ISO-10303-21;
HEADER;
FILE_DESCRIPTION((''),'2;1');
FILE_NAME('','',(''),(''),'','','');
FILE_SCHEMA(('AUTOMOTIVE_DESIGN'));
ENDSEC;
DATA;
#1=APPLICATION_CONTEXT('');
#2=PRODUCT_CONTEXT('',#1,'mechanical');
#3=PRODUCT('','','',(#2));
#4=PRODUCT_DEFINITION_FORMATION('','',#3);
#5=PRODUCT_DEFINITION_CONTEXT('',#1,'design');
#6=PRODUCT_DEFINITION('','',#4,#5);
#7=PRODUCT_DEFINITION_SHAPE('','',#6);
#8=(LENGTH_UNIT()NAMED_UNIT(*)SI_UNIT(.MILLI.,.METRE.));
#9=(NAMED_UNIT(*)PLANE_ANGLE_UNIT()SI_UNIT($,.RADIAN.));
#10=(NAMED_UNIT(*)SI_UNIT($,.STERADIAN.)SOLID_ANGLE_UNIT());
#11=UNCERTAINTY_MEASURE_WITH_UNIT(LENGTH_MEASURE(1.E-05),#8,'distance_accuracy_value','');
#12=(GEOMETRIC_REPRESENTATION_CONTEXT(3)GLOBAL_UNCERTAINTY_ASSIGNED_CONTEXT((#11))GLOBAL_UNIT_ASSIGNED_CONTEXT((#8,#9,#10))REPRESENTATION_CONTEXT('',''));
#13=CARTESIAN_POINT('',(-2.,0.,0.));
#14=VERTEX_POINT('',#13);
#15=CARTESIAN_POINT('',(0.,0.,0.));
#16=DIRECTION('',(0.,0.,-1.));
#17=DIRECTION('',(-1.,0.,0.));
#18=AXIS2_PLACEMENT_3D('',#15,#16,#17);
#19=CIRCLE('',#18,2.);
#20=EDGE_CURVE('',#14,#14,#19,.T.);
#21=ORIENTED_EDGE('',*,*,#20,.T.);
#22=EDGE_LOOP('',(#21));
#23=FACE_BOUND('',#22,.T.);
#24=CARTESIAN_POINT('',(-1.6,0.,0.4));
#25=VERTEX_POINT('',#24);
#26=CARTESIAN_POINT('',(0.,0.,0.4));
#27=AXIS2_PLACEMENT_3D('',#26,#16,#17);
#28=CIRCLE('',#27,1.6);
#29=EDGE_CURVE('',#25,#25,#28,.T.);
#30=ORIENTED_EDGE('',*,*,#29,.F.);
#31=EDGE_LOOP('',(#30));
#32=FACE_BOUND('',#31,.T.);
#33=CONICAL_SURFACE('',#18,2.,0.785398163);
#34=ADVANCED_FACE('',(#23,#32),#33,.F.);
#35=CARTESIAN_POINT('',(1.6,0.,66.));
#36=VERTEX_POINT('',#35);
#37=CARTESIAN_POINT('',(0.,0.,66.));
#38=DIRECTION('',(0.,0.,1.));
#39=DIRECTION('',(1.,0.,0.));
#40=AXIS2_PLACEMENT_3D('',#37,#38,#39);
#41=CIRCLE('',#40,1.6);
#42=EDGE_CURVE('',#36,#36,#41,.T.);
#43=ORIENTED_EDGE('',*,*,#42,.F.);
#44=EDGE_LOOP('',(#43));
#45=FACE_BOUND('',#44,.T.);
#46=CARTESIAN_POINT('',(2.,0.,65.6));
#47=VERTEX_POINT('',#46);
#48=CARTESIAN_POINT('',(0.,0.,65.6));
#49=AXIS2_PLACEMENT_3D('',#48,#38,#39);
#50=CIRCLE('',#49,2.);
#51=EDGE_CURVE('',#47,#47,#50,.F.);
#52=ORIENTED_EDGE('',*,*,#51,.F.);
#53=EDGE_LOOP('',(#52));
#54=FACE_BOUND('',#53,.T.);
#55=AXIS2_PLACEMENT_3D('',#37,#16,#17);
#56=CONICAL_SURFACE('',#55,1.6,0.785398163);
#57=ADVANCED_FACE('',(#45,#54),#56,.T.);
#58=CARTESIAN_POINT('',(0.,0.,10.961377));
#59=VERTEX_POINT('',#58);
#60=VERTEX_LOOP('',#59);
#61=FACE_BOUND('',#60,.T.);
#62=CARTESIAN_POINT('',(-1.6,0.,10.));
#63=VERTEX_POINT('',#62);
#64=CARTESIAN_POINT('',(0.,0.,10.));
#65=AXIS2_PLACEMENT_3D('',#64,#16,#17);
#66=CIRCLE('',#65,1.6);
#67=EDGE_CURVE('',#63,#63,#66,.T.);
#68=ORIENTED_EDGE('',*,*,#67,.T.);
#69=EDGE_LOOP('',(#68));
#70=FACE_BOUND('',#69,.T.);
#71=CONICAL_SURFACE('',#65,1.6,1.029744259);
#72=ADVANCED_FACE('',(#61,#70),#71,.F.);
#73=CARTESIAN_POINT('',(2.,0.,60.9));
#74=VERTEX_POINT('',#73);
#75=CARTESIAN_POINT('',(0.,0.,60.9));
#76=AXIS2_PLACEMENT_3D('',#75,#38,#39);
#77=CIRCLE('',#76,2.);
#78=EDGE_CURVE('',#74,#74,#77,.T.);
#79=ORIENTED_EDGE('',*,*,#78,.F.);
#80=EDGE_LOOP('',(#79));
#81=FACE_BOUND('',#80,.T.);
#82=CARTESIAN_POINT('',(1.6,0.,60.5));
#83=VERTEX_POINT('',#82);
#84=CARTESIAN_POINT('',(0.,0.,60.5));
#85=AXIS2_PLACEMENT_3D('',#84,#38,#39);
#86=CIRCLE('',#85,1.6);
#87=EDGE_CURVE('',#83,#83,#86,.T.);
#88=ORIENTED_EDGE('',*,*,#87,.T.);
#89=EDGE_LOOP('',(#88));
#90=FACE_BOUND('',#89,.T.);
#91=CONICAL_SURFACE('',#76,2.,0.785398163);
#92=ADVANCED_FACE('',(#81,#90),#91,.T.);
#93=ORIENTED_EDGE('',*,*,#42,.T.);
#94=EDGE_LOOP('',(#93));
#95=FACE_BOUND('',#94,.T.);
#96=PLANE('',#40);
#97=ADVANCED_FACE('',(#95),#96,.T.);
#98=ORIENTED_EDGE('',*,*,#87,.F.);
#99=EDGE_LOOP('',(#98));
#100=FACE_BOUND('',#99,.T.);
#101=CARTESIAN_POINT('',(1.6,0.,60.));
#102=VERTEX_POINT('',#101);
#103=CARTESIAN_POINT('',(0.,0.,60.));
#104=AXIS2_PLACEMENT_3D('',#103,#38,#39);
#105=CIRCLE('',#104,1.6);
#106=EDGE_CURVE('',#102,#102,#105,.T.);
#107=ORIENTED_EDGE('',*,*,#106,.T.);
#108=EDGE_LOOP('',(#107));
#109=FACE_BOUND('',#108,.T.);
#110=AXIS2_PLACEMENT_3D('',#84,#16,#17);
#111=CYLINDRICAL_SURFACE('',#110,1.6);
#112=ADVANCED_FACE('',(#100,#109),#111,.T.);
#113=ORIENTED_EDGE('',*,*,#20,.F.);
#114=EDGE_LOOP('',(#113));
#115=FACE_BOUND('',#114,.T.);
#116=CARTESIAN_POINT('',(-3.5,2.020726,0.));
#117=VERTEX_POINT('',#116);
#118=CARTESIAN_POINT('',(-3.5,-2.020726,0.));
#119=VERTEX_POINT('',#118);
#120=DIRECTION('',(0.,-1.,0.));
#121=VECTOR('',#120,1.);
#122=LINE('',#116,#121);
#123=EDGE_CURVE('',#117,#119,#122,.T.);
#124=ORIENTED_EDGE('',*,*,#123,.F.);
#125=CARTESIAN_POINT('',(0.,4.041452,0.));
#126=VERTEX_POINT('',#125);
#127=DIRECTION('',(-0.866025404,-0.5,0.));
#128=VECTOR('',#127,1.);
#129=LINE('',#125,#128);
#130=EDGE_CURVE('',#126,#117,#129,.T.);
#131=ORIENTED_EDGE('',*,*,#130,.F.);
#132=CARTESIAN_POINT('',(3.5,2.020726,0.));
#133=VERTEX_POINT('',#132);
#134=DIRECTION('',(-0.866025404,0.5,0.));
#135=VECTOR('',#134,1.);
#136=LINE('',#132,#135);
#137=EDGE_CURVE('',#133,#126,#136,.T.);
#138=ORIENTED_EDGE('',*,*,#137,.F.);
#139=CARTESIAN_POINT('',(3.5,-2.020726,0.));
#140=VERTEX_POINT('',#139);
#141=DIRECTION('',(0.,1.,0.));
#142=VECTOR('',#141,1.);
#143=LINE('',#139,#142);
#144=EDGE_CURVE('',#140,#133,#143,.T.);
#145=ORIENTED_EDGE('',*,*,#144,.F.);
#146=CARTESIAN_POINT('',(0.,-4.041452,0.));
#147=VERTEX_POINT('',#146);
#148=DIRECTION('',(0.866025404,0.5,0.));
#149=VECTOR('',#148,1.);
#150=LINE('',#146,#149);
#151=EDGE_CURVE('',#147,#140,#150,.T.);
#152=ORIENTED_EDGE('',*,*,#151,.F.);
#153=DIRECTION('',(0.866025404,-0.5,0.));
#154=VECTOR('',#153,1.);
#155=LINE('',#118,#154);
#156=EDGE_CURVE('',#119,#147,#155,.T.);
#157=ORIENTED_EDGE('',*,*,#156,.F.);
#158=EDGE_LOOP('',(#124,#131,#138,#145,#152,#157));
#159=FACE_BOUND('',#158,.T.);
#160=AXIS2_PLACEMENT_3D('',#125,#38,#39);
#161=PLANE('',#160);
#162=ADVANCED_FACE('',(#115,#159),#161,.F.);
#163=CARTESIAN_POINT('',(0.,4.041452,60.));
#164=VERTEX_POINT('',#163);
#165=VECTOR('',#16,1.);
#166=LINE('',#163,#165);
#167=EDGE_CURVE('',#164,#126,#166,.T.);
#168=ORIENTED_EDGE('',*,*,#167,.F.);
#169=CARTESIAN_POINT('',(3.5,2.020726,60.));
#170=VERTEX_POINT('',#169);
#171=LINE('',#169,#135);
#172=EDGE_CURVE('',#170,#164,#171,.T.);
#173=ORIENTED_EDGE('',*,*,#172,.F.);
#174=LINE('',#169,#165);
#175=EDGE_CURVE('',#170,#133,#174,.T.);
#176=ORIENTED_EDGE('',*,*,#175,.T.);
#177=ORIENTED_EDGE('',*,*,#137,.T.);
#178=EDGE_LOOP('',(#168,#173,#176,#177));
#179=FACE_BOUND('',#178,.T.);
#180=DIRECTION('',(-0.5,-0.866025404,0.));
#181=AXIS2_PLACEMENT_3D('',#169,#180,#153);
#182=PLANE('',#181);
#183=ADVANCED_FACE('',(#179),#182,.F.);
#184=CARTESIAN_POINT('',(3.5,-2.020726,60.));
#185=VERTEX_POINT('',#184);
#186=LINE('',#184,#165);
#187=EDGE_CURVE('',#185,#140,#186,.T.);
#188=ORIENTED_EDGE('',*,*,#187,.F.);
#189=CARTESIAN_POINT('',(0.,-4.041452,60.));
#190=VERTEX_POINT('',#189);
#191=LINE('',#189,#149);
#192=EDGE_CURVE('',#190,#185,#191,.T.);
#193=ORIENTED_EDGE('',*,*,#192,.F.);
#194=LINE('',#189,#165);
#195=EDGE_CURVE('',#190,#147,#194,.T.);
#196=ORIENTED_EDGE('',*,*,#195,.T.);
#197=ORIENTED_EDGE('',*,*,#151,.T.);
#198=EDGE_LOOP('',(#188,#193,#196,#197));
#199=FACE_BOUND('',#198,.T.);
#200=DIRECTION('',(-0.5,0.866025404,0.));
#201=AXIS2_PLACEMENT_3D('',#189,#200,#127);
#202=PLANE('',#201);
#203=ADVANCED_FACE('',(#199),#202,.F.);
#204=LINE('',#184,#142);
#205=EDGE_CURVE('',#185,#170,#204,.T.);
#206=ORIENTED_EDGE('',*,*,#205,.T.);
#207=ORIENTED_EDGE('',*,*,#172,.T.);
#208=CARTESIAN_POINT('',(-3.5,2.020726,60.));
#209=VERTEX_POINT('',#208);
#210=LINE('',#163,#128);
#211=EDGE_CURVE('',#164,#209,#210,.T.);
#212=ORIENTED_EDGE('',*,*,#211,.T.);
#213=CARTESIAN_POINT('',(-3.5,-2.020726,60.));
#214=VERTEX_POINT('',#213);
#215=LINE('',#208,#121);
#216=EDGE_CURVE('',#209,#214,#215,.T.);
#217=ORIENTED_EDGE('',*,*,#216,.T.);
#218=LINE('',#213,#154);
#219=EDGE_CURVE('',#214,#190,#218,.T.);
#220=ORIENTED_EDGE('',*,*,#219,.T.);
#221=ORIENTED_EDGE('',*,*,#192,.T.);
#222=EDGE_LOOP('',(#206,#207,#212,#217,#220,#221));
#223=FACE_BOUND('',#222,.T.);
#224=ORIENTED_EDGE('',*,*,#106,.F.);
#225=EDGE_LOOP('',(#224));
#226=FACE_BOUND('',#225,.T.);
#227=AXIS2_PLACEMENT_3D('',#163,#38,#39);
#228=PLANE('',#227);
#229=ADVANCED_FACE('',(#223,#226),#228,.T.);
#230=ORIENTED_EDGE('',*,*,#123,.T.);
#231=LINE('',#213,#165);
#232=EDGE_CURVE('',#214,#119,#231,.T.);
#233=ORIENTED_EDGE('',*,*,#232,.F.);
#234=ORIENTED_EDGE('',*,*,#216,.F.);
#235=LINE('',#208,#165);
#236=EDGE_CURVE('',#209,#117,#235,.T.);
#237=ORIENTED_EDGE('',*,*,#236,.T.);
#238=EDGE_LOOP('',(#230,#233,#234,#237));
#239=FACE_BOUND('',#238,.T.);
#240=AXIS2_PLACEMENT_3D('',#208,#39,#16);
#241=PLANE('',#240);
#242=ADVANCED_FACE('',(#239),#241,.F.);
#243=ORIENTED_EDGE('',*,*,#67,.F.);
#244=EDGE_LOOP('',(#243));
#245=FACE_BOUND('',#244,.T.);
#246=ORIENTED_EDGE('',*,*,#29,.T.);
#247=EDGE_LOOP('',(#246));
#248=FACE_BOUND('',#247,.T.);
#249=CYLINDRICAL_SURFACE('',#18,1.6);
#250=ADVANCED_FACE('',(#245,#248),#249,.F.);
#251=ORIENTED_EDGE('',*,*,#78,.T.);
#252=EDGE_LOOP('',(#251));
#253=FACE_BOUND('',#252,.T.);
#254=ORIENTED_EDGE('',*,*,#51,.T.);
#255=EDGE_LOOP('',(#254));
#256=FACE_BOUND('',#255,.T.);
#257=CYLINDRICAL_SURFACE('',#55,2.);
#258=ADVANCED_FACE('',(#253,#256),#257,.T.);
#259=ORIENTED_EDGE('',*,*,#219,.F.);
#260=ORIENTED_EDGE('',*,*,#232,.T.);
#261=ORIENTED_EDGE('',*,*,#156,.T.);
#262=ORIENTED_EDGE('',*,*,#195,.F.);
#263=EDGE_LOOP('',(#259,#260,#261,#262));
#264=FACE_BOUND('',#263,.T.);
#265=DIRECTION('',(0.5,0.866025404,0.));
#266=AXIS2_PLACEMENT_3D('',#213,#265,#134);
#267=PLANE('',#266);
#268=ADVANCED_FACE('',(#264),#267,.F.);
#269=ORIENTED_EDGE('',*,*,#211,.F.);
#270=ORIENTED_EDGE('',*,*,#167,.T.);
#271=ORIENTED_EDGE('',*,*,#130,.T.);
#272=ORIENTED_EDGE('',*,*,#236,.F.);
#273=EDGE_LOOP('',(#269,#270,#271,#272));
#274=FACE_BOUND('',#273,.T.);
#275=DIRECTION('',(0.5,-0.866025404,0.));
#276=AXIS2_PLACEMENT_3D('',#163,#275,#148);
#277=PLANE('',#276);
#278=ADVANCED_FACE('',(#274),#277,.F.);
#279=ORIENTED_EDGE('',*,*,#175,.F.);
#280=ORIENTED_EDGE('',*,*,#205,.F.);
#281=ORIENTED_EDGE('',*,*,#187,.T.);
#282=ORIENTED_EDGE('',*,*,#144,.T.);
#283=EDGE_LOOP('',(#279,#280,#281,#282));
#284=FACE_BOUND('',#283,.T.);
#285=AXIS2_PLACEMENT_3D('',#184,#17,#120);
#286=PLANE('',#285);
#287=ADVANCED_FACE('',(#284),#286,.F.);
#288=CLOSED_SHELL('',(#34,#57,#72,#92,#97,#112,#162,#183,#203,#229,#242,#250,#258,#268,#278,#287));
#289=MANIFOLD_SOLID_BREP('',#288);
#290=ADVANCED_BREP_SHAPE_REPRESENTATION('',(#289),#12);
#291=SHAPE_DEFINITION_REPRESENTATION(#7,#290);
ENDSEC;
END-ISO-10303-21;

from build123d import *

# Parameters (mm, degrees)
EXTRUDE_1_DEPTH             = 60
SKETCH_2_R                  = 2
EXTRUDE_2_DEPTH             = 6
SKETCH_3_R                  = 2
SKETCH_3_R_2                = 1.6
CUT_EXTRUDE_3_DEPTH         = 0.5
CHAMFER_1_SIZE              = 0.4
HOLE_WIZARD_M31_D           = 3.2
HOLE_WIZARD_M31_DEPTH       = 10
HOLE_WIZARD_M31_CSINK_D     = 4
HOLE_WIZARD_M31_CSINK_ANGLE = 90
HOLE_WIZARD_M31_TIP         = 0.96137699


with BuildPart() as part:
    # Эскиз1 → Вытянуть1 (new body)
    with BuildSketch(Plane.XY):
        Polygon((0, 4.041451884), (-3.5, 2.020725942), (-3.5, -2.020725942), (0, -4.041451884), (3.5, -2.020725942), (3.5, 2.020725942), align=None)
    extrude(amount=EXTRUDE_1_DEPTH)

    # Эскиз2 → Вытянуть2 (add)
    with BuildSketch(Plane.XY.offset(60)):
        Circle(SKETCH_2_R)
    extrude(amount=EXTRUDE_2_DEPTH)

    # Эскиз3 → Вырез-Вытянуть3 (cut)
    with BuildSketch(Plane.XY.offset(60)):
        Circle(SKETCH_3_R)
        Circle(SKETCH_3_R_2, mode=Mode.SUBTRACT)
    extrude(amount=CUT_EXTRUDE_3_DEPTH, mode=Mode.SUBTRACT)

    # Фаска1
    chamfer_1_edges = [part.edges().sort_by_distance(p)[0] for p in [
        (-2, 0, 66),
        (-2, 0, 60.5),
    ]]
    chamfer(chamfer_1_edges, length=CHAMFER_1_SIZE - 0.0001)  # a hair under: the kernel refuses the full size

    # Отверстие с зазором M31
    with Locations(Plane(origin=(0, 0, 0), x_dir=(-1, 0, 0), z_dir=(0, 0, -1))):
        with Locations((0, 0)):
            CounterSinkHole(HOLE_WIZARD_M31_D / 2, HOLE_WIZARD_M31_CSINK_D / 2, depth=HOLE_WIZARD_M31_DEPTH, counter_sink_angle=HOLE_WIZARD_M31_CSINK_ANGLE)
            with Locations((0, 0, -(HOLE_WIZARD_M31_DEPTH + HOLE_WIZARD_M31_TIP / 2))):  # 118° drill point
                Cone(0, HOLE_WIZARD_M31_D / 2, HOLE_WIZARD_M31_TIP, mode=Mode.SUBTRACT)


solid = part.part
